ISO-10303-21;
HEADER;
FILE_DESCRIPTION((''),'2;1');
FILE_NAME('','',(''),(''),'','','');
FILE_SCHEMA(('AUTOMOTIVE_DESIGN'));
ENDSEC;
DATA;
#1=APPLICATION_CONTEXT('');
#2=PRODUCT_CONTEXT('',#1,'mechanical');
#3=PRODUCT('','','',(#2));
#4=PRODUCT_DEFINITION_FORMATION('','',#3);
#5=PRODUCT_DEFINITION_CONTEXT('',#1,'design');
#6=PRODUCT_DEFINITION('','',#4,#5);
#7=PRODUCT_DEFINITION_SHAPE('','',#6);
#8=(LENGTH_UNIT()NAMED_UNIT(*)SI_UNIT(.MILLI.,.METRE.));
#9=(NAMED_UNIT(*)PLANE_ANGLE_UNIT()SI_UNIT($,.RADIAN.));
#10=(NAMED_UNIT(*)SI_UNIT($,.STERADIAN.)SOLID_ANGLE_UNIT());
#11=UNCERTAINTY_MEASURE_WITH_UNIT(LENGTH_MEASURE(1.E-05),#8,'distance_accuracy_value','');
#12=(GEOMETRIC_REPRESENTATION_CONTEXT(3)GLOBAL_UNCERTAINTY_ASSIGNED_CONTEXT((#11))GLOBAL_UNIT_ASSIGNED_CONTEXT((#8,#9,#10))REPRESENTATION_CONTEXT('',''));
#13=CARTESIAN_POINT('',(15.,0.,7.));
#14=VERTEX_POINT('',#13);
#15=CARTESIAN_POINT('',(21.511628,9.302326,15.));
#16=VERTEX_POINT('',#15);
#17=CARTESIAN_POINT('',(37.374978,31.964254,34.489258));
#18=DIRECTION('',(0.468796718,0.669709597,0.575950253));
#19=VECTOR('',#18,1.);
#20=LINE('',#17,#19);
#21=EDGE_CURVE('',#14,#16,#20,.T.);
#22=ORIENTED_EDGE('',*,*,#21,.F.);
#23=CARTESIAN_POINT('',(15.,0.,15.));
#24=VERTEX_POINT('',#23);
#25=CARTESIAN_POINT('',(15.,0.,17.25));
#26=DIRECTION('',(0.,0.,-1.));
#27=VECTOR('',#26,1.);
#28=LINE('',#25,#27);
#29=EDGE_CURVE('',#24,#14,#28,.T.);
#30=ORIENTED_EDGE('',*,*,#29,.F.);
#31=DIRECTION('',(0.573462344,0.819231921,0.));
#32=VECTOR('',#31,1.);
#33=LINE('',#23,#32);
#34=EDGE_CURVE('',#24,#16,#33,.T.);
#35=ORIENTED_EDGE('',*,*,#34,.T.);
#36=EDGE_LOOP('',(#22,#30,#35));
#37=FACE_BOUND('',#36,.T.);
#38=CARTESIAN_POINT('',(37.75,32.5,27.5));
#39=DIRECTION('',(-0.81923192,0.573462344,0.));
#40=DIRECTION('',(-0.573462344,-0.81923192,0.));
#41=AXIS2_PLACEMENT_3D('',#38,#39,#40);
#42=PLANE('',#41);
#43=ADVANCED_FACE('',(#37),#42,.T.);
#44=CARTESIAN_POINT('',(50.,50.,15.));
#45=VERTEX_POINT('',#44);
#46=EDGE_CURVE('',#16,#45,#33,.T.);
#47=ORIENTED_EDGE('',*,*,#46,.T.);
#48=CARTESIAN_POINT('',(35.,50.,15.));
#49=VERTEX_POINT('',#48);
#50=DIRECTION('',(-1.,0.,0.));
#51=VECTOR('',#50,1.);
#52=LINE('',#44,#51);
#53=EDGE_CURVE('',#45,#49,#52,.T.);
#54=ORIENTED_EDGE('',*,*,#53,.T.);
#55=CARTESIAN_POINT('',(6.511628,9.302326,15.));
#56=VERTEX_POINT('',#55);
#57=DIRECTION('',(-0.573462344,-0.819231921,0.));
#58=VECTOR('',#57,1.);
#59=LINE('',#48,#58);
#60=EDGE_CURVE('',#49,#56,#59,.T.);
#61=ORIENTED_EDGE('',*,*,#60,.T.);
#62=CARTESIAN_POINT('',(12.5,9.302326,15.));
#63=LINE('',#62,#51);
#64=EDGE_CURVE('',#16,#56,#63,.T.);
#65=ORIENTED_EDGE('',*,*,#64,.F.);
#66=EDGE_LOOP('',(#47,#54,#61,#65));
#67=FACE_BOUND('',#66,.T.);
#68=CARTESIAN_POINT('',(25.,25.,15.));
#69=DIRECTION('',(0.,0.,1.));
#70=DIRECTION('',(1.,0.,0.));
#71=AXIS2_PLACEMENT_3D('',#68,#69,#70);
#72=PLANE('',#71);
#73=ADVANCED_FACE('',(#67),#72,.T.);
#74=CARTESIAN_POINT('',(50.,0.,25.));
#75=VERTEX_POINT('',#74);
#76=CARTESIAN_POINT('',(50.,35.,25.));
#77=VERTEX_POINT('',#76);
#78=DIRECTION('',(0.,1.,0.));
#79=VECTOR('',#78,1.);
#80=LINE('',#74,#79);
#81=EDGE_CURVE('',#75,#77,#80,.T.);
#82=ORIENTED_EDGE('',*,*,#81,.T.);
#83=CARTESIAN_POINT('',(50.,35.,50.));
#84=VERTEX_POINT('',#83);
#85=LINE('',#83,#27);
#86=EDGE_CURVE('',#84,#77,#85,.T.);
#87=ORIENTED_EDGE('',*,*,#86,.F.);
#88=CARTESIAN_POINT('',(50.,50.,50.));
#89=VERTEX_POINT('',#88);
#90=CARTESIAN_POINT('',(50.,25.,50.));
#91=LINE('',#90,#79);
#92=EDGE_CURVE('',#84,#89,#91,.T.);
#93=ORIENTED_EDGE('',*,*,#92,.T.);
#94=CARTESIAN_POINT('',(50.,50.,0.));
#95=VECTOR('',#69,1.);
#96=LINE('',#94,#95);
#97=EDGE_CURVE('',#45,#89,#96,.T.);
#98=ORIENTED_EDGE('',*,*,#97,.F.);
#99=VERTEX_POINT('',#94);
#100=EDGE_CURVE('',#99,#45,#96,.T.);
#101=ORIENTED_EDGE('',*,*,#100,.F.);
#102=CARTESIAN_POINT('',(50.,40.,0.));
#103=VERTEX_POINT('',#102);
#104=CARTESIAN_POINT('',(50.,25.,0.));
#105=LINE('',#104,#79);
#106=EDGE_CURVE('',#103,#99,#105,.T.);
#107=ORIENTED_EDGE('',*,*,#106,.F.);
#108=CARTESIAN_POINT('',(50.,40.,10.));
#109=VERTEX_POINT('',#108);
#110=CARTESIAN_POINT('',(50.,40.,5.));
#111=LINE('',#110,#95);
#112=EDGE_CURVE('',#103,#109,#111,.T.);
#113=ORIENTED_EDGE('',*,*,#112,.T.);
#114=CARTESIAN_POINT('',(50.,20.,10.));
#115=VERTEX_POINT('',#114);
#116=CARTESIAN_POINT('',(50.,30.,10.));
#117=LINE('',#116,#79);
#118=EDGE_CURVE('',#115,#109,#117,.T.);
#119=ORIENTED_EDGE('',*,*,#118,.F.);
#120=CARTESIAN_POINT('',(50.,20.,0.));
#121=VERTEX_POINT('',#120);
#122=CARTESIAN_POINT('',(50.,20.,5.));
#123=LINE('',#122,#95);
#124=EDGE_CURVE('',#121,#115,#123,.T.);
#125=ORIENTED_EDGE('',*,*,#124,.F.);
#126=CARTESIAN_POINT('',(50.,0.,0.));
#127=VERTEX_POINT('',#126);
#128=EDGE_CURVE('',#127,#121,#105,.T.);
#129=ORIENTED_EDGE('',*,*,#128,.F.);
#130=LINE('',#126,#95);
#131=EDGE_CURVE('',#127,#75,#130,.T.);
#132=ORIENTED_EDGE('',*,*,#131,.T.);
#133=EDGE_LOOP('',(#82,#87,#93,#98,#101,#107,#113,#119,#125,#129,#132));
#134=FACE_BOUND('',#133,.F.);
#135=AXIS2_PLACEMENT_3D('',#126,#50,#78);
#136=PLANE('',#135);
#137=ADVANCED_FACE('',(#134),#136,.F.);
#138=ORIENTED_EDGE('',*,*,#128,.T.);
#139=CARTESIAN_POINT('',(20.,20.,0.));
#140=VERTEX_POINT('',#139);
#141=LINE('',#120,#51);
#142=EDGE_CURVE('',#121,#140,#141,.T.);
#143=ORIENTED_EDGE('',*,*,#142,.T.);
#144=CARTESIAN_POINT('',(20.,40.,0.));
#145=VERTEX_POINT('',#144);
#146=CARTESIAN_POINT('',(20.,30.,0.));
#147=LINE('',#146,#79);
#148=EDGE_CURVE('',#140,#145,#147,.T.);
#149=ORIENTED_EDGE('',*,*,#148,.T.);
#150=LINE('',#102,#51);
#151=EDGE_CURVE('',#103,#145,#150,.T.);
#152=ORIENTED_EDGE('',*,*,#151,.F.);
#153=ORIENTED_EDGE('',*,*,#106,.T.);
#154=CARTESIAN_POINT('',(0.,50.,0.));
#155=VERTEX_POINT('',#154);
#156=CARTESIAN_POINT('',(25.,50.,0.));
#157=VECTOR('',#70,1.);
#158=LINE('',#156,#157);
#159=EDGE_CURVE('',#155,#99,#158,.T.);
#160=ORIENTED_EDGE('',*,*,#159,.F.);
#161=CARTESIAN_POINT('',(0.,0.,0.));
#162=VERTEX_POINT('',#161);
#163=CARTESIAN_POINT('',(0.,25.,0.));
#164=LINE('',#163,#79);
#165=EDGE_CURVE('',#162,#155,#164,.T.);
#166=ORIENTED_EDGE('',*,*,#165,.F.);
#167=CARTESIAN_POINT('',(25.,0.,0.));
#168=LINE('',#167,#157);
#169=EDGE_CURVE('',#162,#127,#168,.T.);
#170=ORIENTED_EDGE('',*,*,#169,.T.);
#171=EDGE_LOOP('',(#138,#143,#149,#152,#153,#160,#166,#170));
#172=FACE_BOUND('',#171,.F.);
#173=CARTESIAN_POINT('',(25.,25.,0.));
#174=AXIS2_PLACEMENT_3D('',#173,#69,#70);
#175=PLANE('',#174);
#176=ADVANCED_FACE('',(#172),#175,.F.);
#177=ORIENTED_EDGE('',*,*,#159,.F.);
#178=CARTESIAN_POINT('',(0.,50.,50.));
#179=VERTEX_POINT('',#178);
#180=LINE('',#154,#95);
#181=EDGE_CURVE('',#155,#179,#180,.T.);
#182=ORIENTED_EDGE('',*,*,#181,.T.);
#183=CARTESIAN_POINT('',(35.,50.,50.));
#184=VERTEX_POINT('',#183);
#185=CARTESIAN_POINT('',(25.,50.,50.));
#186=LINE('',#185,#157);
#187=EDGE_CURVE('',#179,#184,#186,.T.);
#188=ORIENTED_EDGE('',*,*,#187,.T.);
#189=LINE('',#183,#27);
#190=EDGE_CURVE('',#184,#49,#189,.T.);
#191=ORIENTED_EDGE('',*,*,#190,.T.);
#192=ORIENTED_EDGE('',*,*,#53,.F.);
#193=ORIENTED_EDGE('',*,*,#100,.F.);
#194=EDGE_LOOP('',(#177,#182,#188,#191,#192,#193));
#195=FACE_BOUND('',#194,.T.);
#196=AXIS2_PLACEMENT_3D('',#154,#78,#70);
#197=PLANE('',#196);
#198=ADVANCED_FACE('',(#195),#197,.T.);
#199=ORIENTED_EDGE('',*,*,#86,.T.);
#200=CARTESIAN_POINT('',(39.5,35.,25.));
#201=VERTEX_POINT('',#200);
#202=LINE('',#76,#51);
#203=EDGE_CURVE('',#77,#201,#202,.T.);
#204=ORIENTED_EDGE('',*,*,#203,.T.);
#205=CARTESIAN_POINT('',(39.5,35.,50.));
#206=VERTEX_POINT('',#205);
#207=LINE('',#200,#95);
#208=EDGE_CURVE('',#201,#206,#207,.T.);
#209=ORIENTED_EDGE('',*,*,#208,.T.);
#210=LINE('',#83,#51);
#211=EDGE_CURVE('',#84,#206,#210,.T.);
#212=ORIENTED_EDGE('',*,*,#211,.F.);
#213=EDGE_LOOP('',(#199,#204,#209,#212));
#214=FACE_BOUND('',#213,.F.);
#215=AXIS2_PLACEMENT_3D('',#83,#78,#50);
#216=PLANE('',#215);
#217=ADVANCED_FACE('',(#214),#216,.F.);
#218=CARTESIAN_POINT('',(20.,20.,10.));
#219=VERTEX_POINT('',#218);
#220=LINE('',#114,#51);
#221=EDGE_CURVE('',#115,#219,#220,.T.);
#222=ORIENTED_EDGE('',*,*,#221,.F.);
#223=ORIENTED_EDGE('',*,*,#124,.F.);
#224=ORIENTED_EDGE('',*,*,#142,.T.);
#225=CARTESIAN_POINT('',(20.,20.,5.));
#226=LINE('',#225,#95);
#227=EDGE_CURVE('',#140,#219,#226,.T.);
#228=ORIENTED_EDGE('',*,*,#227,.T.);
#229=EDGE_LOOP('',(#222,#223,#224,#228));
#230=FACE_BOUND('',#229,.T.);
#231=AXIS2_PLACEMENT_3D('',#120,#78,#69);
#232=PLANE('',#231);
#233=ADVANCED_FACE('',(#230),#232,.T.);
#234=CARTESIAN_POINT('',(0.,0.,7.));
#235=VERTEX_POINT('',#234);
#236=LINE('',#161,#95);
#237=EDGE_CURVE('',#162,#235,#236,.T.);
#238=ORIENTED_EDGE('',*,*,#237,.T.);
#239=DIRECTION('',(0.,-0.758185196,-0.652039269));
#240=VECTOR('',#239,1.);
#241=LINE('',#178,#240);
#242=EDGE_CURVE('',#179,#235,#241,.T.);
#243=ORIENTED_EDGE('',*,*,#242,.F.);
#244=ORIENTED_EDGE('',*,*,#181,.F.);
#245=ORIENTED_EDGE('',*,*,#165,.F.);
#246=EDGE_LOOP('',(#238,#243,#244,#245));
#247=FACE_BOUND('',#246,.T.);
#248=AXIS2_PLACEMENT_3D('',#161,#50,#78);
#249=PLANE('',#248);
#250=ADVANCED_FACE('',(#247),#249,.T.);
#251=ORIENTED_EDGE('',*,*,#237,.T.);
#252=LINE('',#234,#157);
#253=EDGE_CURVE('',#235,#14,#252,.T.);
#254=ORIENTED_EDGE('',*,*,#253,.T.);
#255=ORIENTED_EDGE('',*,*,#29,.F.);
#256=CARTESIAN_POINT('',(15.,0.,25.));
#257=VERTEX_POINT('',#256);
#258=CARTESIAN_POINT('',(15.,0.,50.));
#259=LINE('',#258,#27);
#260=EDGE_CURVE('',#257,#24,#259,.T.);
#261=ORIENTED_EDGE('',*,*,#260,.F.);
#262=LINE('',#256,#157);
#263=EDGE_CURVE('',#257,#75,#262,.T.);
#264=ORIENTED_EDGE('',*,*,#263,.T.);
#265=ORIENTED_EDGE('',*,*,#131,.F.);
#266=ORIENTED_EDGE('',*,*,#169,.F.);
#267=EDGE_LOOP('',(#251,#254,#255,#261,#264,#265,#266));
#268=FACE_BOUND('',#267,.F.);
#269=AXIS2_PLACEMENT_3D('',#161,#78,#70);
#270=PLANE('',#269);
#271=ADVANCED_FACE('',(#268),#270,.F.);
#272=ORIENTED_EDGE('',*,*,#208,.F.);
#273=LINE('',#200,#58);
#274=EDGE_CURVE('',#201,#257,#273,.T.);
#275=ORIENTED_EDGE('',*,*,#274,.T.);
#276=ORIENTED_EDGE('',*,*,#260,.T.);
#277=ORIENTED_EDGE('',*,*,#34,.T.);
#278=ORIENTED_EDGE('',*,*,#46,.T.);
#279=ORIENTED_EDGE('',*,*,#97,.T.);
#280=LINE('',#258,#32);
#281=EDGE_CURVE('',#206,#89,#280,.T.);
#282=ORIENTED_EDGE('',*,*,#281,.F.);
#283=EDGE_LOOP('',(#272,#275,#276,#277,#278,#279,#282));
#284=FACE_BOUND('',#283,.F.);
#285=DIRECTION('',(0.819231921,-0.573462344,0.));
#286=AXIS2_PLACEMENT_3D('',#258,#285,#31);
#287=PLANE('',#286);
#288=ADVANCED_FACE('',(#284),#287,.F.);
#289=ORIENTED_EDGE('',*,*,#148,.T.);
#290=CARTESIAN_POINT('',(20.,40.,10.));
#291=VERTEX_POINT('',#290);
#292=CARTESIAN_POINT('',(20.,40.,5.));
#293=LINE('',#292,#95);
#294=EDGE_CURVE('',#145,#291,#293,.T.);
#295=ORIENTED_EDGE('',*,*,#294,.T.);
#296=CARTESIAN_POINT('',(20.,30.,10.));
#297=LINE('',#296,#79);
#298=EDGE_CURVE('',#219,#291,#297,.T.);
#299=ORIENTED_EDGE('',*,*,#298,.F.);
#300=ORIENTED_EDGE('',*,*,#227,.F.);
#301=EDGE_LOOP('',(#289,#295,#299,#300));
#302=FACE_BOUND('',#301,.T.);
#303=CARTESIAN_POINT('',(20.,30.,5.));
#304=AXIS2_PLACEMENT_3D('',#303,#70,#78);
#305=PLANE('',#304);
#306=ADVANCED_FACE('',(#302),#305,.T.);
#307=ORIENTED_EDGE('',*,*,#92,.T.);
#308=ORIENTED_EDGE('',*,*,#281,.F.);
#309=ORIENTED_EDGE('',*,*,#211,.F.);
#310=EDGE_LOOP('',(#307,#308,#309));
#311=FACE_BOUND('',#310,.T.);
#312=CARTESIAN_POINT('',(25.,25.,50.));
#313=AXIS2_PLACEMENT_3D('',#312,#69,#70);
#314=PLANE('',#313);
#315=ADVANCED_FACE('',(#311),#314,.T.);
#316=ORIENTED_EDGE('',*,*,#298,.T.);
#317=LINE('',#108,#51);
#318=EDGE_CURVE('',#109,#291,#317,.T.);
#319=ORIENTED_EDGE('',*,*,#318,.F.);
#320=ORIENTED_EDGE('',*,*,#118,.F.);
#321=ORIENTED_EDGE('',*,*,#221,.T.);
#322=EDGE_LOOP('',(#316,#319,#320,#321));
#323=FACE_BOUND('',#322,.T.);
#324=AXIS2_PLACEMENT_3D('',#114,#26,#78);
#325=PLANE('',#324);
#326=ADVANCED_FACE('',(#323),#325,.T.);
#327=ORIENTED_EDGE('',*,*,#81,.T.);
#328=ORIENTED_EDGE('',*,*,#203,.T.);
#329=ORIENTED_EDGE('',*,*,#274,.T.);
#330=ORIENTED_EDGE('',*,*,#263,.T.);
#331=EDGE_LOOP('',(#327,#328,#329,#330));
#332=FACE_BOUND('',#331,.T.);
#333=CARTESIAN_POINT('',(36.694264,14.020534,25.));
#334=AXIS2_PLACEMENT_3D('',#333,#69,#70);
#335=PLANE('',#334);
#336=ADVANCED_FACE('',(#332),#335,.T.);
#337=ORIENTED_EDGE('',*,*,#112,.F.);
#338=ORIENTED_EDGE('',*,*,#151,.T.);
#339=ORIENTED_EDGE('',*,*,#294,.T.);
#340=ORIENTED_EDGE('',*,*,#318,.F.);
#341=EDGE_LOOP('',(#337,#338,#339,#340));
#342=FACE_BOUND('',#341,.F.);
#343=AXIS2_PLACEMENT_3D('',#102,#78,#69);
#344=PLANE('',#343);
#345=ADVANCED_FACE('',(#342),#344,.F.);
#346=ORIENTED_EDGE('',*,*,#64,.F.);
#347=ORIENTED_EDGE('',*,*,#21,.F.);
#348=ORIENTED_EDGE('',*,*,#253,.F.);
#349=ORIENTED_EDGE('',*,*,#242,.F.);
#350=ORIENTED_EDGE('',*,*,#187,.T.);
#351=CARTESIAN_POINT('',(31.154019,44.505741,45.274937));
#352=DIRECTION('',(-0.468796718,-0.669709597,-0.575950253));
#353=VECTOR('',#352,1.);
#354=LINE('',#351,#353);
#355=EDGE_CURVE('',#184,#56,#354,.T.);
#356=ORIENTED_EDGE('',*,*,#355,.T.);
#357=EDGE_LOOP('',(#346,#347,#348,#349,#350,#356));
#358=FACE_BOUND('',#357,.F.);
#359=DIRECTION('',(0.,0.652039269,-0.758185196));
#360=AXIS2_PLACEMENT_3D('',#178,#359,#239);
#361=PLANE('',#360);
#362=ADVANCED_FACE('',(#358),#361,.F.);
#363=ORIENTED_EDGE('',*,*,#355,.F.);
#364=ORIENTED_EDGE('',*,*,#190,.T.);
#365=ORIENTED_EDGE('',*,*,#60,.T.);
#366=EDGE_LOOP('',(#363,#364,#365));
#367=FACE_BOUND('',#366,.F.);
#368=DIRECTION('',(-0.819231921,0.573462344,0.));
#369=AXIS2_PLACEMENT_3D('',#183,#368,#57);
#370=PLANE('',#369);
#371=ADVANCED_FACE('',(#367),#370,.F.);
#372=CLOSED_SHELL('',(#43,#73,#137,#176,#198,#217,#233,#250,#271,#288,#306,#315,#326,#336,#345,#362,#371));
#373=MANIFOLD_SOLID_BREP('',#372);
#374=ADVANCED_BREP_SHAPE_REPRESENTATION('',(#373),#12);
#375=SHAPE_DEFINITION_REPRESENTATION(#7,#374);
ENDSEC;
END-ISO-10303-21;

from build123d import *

# Parameters (mm, degrees)
F0_W      = 50
F0_H      = 50
F1_DEPTH  = 50
F2_W      = 20
F2_H      = 10
F3_DEPTH  = 30
F8_DEPTH  = 35
F10_DEPTH = 25
F12_REACH = 115.9479483752


with BuildPart() as f1:
    # F0 (on Top) → F1 (new body)
    with BuildSketch(Plane.XY):
        with Locations((25, 25)):
            Rectangle(F0_W, F0_H)
    extrude(amount=F1_DEPTH)

    # F2 (on face) → F3 (cut)
    with BuildSketch(Plane.YZ.offset(50)):
        with Locations((30, 5)):
            Rectangle(F2_W, F2_H)
    extrude(amount=-F3_DEPTH, mode=Mode.SUBTRACT)

    # F7 (on face) → F8 (cut)
    with BuildSketch(Plane.XY.offset(50)):
        Polygon((15, 0), (50, 50), (35, 50), (0, 0), align=None)
    extrude(amount=-F8_DEPTH, mode=Mode.SUBTRACT)

    # F9 (on face) → F10 (cut)
    with BuildSketch(Plane.XY.offset(50)):
        Polygon((15, 0), (50, 0), (50, 35), (39.5, 35), align=None)
    extrude(amount=-F10_DEPTH, mode=Mode.SUBTRACT)

    f12_end = Plane(origin=(37.75, 32.5, 27.5), x_dir=(-0.5734623444, -0.8192319205, 0), z_dir=(-0.8192319205, 0.5734623444, 0))
    # F11 (on face) → F12 (cut, up to a plane its end follows)
    with BuildSketch(Plane(origin=(0, 0, 0), x_dir=(0, -1, 0), z_dir=(-1, 0, 0))):
        Polygon((0, 50), (-50, 50), (0, 7), align=None)
    f12_long = extrude(amount=-F12_REACH, mode=Mode.PRIVATE)
    add(split(f12_long, bisect_by=f12_end, keep=Keep.TOP, mode=Mode.PRIVATE), mode=Mode.SUBTRACT)


solid = f1.part
